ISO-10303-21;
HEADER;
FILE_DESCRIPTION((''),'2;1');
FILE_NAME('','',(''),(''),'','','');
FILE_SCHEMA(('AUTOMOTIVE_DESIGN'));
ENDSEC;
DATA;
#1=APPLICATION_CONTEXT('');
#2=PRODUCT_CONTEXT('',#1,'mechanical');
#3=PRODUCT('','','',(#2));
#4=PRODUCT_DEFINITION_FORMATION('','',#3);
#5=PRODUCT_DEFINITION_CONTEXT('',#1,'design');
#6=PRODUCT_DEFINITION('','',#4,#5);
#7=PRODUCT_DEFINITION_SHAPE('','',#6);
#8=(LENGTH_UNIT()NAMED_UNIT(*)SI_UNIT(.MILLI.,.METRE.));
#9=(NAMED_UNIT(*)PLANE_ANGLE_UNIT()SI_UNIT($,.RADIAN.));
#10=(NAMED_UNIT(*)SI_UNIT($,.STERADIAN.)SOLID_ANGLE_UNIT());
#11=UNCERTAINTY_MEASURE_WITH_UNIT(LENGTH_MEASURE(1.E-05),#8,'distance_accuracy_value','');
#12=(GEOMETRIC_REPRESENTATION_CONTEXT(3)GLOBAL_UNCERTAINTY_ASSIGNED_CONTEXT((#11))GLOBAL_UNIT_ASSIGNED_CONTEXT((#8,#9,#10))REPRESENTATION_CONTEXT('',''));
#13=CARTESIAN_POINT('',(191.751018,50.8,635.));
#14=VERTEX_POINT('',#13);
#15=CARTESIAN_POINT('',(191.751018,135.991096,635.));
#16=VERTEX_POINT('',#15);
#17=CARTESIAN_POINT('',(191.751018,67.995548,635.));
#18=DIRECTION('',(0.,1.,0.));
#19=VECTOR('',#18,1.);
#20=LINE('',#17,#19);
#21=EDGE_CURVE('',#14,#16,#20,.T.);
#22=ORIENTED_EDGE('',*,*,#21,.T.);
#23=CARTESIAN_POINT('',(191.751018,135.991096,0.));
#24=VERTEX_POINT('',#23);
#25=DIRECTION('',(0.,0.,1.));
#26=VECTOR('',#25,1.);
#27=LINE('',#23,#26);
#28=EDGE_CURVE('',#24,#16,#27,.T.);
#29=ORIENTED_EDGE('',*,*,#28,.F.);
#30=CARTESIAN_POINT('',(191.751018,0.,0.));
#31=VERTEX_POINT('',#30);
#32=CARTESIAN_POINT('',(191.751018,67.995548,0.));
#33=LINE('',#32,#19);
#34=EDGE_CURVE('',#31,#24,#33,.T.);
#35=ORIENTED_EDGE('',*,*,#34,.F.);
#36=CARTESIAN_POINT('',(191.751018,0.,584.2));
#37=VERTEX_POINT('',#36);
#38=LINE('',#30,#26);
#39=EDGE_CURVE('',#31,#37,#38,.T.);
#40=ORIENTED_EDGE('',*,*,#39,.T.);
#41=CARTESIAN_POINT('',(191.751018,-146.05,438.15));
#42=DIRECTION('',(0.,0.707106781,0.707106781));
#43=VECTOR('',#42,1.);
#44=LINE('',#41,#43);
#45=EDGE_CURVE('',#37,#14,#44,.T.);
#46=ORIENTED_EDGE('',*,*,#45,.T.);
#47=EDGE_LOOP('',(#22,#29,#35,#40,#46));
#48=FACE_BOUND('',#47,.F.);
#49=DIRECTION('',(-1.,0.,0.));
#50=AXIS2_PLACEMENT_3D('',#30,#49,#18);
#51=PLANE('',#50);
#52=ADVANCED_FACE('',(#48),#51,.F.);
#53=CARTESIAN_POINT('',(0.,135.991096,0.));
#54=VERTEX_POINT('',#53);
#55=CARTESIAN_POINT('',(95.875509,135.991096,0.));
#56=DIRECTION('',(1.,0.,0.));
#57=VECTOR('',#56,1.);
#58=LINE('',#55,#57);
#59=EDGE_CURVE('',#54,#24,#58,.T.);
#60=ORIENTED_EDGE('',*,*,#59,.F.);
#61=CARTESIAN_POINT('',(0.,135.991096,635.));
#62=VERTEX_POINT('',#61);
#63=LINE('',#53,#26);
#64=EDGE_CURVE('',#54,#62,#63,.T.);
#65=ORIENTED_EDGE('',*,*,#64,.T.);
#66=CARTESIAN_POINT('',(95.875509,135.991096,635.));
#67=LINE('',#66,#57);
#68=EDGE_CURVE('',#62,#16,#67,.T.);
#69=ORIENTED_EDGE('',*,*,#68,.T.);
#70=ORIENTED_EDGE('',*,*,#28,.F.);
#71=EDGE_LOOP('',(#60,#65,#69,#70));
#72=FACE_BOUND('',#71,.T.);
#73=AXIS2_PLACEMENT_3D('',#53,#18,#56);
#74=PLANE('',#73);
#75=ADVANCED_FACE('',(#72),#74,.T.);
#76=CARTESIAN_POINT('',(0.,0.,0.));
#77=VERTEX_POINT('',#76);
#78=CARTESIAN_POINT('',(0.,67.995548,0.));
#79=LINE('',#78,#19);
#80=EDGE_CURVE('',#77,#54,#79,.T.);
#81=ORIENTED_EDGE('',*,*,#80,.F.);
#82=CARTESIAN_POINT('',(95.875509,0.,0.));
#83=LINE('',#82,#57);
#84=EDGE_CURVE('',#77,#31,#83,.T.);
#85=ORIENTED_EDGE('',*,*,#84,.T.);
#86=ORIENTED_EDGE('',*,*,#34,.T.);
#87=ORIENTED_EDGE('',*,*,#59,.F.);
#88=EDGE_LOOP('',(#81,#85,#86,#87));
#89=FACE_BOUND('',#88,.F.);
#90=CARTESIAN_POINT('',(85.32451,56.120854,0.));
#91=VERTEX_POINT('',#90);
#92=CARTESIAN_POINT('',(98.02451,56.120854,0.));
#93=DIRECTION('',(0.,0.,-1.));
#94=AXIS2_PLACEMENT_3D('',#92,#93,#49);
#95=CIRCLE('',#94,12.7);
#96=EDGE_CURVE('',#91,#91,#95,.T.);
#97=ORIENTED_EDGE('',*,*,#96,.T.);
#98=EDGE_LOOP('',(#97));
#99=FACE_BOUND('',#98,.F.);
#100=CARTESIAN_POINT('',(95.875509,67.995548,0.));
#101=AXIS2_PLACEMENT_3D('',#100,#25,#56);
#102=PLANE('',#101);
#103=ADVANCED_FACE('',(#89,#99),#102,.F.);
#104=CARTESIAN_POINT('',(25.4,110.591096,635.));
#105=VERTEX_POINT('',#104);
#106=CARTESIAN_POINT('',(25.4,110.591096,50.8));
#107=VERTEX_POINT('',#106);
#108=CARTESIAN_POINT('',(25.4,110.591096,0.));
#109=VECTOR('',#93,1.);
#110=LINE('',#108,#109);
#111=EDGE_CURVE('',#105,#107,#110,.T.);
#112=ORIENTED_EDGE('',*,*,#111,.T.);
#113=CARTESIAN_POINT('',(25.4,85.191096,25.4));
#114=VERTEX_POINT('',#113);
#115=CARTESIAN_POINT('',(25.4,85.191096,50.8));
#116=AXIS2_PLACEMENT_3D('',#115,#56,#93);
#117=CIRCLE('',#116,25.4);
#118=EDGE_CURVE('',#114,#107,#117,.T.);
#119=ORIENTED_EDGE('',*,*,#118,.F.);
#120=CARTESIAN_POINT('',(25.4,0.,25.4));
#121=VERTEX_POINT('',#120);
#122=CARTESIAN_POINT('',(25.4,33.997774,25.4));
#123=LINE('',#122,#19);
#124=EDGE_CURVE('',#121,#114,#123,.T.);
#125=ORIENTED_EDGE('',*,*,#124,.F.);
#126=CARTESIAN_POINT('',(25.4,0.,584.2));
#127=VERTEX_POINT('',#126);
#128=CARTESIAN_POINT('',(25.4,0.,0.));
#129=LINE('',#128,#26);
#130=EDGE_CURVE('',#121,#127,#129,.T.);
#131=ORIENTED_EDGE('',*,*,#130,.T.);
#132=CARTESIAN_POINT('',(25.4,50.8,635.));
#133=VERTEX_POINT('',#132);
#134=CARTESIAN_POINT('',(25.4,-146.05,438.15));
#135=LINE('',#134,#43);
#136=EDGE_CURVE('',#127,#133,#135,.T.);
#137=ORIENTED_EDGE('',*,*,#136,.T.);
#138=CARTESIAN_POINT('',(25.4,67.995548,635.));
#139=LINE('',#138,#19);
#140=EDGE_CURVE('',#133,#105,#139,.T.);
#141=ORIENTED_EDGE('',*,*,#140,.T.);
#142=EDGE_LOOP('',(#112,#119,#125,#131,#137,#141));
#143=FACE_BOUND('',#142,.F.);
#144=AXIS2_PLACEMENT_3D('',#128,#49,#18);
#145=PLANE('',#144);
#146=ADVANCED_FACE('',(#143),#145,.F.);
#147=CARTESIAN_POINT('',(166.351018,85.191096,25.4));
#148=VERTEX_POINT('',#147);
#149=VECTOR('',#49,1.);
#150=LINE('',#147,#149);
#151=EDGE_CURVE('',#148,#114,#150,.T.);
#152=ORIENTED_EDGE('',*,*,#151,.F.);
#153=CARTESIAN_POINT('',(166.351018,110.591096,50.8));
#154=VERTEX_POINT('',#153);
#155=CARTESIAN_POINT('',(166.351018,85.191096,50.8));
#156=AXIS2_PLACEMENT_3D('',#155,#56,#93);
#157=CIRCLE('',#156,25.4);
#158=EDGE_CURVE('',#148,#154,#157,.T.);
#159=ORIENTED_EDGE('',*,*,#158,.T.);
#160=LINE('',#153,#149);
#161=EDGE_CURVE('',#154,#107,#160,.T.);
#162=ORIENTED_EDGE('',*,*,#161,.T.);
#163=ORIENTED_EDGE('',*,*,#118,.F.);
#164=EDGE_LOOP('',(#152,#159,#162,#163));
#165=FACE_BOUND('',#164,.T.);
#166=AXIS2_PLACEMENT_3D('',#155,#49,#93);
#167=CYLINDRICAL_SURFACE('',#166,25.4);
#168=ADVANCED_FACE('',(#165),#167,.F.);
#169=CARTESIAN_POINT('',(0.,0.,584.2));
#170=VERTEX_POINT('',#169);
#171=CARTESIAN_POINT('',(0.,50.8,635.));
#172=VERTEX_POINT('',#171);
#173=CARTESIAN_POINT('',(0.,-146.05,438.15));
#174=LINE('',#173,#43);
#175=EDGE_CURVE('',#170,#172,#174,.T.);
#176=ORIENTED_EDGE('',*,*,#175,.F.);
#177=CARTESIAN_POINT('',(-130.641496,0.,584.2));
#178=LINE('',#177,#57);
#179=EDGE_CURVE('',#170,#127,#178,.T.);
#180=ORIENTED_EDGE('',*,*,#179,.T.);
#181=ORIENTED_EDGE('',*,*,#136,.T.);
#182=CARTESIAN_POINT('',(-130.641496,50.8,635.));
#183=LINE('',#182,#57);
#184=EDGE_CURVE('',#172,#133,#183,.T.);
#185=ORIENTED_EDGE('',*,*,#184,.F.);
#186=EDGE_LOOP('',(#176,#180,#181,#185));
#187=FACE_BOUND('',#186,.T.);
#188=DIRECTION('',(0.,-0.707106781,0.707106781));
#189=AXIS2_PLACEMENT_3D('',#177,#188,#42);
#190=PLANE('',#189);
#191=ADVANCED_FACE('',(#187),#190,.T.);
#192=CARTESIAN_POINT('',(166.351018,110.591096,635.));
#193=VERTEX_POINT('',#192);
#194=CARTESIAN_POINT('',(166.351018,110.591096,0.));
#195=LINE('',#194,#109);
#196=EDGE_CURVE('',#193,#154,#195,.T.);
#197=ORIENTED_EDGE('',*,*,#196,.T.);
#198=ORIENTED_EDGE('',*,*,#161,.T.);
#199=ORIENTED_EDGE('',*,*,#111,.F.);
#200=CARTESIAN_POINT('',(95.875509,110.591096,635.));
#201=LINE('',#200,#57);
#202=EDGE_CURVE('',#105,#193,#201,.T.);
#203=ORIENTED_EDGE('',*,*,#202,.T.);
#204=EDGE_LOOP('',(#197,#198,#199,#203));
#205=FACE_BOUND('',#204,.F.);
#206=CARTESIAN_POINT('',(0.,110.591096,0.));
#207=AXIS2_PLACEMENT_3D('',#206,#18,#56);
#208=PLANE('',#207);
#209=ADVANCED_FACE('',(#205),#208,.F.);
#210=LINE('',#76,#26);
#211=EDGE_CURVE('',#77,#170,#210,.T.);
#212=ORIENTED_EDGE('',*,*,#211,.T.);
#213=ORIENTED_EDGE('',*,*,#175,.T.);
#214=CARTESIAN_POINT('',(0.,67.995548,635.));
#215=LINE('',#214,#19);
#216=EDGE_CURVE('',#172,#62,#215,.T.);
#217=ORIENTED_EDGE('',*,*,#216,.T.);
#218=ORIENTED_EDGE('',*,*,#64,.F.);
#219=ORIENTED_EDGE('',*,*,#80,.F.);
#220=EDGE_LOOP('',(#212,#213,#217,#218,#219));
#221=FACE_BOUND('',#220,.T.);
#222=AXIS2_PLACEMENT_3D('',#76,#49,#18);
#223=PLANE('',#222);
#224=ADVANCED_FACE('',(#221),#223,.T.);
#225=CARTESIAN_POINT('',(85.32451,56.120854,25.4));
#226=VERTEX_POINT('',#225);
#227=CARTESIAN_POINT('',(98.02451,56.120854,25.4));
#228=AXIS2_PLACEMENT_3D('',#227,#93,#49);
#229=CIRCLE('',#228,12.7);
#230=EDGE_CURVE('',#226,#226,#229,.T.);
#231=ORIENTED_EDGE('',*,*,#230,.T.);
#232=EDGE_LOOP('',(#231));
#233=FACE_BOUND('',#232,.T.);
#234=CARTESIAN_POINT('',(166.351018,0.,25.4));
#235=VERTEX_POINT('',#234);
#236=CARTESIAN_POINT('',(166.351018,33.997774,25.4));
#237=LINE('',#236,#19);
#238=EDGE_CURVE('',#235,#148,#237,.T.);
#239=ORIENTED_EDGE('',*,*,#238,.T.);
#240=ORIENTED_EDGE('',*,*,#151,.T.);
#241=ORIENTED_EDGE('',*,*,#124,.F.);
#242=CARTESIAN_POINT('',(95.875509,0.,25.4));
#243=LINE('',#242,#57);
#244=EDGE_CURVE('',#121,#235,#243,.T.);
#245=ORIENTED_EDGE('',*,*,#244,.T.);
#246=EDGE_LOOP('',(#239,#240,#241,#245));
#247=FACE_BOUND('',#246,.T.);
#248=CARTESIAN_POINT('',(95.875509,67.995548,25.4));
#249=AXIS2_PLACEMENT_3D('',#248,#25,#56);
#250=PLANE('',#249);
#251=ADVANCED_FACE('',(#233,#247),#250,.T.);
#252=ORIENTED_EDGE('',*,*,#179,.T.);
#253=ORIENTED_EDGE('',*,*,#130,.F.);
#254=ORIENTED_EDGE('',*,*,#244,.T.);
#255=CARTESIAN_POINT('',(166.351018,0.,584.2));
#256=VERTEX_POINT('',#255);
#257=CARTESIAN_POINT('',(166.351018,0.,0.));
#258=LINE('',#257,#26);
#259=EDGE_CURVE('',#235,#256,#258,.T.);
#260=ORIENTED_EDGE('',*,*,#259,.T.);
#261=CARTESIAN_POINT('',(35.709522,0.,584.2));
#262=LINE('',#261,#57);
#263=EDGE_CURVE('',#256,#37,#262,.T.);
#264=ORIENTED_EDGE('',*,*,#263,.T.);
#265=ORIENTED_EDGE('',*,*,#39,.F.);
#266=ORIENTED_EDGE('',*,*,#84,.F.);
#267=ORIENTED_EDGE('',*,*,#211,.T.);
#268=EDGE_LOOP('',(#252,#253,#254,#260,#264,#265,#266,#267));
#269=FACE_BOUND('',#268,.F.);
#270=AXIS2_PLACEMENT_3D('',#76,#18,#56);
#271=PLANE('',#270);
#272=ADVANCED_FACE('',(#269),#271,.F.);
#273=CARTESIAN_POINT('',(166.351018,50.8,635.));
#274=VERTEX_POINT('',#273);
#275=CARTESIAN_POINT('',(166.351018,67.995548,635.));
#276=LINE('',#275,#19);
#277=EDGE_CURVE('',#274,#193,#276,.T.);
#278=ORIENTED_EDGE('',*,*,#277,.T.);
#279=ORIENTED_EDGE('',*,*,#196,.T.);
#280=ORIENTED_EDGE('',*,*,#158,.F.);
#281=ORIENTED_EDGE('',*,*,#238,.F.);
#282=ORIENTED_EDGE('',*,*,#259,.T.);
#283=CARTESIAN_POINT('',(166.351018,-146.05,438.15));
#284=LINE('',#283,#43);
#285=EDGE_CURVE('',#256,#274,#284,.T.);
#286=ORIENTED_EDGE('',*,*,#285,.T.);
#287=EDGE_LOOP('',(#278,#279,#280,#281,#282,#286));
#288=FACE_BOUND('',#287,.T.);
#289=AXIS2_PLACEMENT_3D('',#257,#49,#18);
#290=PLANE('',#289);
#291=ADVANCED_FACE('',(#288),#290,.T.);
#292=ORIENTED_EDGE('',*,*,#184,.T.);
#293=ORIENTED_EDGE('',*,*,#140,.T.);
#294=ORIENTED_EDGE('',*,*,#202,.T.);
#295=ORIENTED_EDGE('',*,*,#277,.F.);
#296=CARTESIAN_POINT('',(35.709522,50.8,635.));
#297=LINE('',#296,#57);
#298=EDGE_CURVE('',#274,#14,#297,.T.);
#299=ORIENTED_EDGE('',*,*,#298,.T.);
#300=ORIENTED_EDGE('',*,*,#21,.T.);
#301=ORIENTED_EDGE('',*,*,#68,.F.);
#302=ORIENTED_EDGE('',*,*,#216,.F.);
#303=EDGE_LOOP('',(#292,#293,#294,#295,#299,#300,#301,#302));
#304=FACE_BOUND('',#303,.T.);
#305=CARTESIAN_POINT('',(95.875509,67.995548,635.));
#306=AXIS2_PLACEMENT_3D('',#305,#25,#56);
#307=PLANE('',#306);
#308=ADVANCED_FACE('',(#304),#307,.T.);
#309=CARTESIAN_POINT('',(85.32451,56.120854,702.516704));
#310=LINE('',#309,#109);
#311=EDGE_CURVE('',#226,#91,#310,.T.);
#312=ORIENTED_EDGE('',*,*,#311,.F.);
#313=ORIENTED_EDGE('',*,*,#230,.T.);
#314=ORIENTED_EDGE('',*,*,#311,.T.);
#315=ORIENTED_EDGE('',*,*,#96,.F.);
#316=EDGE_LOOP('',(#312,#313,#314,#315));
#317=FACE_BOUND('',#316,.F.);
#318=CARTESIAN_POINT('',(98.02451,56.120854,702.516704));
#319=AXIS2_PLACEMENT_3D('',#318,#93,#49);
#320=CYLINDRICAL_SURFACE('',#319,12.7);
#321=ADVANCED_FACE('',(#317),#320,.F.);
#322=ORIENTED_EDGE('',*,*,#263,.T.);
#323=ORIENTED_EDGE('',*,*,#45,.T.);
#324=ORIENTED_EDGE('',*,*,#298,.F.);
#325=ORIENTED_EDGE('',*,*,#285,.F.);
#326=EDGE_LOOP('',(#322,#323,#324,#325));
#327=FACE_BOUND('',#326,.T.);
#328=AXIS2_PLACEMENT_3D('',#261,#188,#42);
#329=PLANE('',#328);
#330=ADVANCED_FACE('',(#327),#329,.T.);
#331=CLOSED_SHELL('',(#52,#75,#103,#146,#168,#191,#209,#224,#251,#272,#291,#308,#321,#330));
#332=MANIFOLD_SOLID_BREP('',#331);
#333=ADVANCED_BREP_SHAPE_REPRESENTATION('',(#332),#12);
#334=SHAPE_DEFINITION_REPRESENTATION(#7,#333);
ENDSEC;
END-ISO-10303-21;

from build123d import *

# Parameters (mm, degrees)
F0_W        = 191.7510181665
F0_H        = 135.9910964966
F1_DEPTH    = 635
F2_T        = -25.4
F4_D        = 25.4
F5_R        = 25.4
F6_T1_DEPTH = 286.6829915773
F6_T3_DEPTH = 286.6829915773


# Not quite as in the source:
# - a fillet or chamfer that OpenCascade refuses, or shapes differently, is made with other operations: its cross-section is extruded or revolved along the edge and cut away or added


with BuildPart() as f1:
    # F0 (on Top) → F1 (new body)
    with BuildSketch(Plane.XY):
        with Locations((95.8755090833, 67.9955482483)):
            Rectangle(F0_W, F0_H)
    extrude(amount=F1_DEPTH)

    # F2
    f2_openings = [f1.faces().sort_by_distance(p)[0] for p in [
        (95.875509, 0, 317.5),
        (95.875509, 67.995548, 635),
    ]]
    offset(amount=F2_T, openings=f2_openings)

    # F4 (through all)
    with Locations(Plane.XY.offset(25.4)):
        with Locations((98.0245098472, 56.1208538711)):
            Hole(F4_D / 2)

    # F5
    f5_edges = [f1.edges().sort_by_distance(p)[0] for p in [
        (95.875509, 110.591096, 25.4),
    ]]
    fillet(f5_edges, radius=F5_R)

    # F6: chamfer of 50.8 on 3 edges, made by hand

    # F6_s2 → F6_t1 (cut)
    with BuildSketch(Plane.YZ.offset(-130.6414957887)):
        Polygon((0, 584.2), (50.8, 635), (0, 635), align=None)
    extrude(amount=F6_T1_DEPTH, mode=Mode.SUBTRACT)

    # F6_s4 → F6_t3 (cut)
    with BuildSketch(Plane.YZ.offset(35.7095223779)):
        Polygon((0, 584.2), (50.8, 635), (0, 635), align=None)
    extrude(amount=F6_T3_DEPTH, mode=Mode.SUBTRACT)


solid = f1.part
